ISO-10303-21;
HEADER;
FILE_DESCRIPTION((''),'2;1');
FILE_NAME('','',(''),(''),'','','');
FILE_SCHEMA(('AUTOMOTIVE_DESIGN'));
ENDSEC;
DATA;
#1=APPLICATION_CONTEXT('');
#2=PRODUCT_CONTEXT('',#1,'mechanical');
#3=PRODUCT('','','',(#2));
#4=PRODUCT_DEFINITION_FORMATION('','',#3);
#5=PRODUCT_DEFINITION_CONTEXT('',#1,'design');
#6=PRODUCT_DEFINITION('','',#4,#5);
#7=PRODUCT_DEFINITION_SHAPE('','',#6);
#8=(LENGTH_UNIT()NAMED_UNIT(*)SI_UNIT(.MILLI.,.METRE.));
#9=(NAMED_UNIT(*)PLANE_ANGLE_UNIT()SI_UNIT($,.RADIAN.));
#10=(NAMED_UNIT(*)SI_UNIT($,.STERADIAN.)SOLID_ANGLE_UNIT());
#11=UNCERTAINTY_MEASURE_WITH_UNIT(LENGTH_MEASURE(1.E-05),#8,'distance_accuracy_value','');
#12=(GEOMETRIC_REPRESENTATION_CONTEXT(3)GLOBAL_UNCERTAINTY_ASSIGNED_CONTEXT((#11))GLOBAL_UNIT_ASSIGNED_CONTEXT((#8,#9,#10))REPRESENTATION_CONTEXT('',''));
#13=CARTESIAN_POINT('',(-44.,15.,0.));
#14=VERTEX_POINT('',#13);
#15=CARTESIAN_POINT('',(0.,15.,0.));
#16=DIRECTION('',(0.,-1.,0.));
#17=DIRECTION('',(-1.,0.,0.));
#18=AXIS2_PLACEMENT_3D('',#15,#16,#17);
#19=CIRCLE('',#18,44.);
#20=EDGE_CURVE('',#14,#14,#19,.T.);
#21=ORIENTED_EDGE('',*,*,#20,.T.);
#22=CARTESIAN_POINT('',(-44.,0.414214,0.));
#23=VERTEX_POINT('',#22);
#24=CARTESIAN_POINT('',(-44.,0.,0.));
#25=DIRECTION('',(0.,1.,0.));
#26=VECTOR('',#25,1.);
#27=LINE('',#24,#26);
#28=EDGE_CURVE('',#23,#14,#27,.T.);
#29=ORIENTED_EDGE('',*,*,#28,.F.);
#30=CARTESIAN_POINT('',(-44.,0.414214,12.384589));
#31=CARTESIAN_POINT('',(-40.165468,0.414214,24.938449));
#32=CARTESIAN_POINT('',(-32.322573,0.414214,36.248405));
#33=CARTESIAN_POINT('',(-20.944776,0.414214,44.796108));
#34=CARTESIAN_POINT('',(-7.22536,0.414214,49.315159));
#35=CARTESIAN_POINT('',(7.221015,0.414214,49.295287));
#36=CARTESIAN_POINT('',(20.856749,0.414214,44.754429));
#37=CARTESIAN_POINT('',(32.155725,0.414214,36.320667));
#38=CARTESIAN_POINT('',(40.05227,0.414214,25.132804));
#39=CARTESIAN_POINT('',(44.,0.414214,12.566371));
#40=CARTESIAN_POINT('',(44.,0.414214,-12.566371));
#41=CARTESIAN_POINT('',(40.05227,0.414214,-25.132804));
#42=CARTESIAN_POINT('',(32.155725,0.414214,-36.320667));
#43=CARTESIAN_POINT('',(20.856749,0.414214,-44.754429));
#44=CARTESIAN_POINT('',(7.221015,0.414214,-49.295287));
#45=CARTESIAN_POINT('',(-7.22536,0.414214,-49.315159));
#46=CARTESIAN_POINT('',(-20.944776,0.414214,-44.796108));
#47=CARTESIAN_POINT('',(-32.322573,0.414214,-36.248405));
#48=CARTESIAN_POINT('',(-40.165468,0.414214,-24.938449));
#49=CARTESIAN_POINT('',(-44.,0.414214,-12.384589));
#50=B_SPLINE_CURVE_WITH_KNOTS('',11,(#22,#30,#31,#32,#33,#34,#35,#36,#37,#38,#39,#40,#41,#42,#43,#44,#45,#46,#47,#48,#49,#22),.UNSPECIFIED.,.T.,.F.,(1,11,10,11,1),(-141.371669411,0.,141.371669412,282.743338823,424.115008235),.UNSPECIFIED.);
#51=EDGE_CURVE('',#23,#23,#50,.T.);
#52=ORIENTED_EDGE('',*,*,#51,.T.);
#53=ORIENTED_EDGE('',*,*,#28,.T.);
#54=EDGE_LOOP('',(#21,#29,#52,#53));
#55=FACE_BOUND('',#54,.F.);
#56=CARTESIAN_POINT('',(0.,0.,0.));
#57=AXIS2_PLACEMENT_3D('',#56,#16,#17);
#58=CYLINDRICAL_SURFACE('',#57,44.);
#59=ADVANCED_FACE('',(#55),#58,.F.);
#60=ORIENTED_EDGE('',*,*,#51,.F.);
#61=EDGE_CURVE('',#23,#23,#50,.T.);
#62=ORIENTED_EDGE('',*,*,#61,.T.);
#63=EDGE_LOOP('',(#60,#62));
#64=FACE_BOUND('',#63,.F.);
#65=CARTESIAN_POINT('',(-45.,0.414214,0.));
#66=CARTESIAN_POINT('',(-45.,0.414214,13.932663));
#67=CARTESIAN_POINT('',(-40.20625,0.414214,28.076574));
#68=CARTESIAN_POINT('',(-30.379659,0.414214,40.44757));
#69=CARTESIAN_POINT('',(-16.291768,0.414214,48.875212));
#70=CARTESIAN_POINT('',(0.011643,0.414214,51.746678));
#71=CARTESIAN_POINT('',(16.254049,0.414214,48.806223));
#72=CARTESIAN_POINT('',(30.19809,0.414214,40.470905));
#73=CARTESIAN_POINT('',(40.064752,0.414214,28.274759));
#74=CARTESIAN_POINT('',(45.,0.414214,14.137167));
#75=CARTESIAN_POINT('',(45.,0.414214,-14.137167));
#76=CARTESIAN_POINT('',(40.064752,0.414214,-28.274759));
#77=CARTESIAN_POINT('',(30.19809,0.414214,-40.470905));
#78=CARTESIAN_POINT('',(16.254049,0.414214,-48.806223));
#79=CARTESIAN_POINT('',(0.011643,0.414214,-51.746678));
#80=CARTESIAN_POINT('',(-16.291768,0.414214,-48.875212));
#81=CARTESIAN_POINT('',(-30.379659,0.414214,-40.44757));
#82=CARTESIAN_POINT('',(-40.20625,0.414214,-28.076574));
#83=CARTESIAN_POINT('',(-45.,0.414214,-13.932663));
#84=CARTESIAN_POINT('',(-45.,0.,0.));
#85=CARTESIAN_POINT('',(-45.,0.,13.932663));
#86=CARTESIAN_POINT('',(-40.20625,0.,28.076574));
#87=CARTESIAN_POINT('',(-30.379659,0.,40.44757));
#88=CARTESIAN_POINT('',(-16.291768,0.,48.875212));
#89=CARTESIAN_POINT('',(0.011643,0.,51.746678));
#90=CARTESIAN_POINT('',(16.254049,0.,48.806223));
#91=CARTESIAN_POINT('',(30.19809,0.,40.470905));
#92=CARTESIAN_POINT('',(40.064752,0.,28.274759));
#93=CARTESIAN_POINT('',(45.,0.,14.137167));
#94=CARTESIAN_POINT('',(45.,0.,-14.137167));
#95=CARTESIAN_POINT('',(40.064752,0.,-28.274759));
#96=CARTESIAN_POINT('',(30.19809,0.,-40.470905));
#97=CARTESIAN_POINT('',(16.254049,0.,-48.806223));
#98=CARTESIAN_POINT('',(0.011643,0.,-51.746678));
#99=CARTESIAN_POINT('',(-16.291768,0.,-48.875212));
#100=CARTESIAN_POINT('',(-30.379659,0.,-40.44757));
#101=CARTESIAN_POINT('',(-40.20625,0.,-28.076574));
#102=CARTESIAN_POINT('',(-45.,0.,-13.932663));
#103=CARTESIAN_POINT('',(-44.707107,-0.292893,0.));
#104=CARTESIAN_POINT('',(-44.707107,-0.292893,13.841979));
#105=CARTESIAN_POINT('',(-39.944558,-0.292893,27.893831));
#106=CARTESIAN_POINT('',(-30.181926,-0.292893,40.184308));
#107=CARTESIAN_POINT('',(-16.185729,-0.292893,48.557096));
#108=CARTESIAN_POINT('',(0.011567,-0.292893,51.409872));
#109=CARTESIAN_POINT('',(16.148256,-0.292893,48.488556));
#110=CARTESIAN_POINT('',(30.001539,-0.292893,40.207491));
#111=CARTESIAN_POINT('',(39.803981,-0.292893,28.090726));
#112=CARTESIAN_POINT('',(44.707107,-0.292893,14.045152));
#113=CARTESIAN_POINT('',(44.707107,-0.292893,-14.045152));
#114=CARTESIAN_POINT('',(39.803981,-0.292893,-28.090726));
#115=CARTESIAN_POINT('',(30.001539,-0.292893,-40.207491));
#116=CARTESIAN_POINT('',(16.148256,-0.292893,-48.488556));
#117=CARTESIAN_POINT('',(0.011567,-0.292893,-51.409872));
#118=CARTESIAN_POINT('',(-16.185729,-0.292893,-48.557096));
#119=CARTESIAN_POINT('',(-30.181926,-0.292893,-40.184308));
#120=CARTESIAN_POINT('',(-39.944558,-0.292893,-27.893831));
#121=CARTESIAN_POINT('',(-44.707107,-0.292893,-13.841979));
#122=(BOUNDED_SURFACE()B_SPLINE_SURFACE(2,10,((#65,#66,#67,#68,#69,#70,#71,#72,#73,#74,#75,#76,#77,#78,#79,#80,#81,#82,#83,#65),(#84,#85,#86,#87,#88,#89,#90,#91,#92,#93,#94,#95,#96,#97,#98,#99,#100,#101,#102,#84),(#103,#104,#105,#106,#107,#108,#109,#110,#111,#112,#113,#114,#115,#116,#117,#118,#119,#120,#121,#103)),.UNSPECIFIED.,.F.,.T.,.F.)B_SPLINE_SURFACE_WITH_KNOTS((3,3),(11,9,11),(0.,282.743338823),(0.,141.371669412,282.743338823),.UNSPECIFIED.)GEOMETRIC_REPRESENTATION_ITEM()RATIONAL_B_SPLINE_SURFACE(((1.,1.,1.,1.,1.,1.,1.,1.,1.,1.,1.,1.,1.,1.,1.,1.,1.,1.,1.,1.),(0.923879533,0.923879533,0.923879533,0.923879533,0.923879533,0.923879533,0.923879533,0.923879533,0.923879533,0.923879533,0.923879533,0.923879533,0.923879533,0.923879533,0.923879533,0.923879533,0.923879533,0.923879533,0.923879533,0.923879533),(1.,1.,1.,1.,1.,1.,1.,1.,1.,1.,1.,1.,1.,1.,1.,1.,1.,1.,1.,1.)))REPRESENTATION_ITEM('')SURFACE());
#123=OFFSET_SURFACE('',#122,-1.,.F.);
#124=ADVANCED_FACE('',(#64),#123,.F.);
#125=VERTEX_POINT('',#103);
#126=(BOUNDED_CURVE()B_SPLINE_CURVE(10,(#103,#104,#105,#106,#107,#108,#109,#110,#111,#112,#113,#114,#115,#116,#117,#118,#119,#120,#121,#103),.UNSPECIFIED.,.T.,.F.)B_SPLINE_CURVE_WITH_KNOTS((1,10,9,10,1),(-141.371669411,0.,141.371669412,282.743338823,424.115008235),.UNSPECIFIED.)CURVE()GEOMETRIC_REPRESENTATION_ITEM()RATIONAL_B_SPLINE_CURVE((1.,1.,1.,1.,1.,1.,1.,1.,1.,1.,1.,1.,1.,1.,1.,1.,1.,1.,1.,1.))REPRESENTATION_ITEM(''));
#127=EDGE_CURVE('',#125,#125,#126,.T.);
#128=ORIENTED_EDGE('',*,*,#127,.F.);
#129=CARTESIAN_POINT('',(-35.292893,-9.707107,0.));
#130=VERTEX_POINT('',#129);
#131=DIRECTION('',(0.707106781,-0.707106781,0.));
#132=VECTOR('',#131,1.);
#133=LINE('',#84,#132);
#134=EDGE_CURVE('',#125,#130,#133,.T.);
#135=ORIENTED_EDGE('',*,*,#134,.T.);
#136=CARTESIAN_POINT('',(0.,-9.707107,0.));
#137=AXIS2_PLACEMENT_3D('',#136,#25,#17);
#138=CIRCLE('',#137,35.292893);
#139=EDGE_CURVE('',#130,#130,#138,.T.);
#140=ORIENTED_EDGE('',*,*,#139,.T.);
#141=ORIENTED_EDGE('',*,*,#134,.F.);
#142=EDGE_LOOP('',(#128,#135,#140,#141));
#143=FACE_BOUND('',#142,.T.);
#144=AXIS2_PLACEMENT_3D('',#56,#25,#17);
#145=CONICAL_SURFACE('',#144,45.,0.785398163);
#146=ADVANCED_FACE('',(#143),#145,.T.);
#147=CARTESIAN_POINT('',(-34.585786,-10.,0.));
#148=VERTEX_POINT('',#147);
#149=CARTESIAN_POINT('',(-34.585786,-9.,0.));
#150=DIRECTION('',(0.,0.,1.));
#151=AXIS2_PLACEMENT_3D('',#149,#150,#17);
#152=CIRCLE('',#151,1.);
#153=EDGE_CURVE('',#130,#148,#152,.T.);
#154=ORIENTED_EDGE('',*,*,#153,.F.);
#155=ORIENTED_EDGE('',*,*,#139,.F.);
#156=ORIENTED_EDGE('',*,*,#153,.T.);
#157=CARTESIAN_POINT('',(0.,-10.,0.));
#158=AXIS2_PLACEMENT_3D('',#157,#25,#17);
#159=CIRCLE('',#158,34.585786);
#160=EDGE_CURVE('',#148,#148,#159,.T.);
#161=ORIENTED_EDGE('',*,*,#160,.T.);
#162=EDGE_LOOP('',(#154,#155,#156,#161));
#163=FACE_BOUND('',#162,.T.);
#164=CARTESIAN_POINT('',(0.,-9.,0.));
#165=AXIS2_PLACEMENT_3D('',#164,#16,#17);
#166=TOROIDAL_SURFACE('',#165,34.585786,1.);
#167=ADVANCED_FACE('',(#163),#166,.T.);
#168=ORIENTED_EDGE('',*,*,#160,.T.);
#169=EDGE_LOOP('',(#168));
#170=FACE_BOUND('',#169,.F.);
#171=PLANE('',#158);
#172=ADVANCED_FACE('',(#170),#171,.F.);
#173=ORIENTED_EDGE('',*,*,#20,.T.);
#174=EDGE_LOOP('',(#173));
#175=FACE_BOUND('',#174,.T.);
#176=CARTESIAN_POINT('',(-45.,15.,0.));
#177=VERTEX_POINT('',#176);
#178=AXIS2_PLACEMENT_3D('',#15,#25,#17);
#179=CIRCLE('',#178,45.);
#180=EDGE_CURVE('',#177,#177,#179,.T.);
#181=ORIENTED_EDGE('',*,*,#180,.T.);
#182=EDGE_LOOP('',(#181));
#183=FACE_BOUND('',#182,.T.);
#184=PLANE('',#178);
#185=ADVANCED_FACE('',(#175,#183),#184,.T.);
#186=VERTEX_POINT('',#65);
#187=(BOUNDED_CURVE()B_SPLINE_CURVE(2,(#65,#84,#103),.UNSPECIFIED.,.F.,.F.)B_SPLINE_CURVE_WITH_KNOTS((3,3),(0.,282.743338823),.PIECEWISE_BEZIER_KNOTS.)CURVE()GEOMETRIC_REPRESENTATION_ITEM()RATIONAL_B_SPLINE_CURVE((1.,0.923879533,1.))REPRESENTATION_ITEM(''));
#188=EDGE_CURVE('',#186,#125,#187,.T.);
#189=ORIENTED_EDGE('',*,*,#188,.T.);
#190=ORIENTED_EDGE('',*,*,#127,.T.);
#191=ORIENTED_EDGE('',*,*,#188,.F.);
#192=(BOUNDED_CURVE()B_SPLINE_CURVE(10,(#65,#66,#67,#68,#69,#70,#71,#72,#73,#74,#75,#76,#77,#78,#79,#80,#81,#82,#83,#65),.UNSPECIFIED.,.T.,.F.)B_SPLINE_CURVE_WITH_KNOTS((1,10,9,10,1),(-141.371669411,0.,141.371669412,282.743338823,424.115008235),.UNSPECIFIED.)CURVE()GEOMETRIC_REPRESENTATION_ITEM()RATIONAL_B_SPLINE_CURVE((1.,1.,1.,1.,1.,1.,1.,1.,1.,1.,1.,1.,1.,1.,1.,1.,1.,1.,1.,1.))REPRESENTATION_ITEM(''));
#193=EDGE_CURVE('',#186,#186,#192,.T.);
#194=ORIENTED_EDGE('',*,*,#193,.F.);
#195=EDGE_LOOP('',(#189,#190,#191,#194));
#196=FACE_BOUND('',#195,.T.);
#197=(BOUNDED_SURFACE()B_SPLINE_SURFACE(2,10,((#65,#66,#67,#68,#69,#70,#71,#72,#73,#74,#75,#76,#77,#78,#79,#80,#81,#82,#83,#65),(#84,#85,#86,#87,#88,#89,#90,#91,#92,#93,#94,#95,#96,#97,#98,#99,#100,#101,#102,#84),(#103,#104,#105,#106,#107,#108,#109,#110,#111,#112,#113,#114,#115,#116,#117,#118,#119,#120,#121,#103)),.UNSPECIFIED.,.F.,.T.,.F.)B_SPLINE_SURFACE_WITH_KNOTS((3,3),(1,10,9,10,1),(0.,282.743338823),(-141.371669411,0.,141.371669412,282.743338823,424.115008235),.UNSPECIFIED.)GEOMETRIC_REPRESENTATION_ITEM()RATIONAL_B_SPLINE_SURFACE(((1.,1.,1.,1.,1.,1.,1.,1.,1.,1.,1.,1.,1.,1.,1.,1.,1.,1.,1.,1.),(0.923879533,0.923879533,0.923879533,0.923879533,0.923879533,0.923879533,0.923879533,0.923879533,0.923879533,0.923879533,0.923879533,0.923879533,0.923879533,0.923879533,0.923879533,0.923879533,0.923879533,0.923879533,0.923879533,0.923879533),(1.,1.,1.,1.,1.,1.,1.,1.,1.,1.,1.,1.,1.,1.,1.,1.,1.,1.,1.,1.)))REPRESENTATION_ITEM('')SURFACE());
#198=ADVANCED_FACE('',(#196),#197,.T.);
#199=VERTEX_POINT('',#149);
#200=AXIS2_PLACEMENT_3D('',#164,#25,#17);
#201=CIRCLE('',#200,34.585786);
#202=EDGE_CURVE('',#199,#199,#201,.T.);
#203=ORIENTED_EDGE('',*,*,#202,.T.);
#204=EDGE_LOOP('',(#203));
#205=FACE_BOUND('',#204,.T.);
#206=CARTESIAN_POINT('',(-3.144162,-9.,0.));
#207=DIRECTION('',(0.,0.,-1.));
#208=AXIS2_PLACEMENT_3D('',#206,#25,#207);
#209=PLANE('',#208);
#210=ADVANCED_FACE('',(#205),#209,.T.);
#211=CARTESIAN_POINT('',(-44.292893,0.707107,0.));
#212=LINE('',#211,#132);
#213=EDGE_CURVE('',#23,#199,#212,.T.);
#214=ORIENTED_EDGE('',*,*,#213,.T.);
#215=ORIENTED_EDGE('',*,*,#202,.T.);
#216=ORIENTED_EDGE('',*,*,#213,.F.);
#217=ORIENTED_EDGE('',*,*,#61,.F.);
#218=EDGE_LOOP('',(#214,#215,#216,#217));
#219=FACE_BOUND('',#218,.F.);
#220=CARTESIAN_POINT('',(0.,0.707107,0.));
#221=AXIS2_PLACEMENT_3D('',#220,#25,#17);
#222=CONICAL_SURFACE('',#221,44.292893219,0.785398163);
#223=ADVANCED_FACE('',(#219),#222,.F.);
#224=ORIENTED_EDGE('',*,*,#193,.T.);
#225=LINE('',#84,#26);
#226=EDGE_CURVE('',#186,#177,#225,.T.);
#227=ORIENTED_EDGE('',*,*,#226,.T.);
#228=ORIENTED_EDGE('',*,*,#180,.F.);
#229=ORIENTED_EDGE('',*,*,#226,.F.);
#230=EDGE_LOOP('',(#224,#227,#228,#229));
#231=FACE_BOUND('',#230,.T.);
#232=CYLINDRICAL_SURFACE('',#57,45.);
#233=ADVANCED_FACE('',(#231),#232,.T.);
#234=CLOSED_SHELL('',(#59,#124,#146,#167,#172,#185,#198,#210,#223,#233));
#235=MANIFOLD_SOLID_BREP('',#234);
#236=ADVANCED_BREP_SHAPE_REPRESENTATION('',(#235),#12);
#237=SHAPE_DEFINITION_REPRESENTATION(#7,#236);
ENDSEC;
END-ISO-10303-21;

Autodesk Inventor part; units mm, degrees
ref_plane "YZ Plane" through (0, 0, 0) normal (1, 0, 0) x (0, 1, 0)
ref_plane "XZ Plane" through (0, 0, 0) normal (0, 1, 0) x (-1, 0, 0)
ref_plane "XY Plane" through (0, 0, 0) normal (0, 0, 1) x (1, 0, 0)
sketch "Boceto1" plane through (0, 0, 0) normal (0, 1, 0) x (-1, 0, 0)
  circle A0 centre (0, 0) radius 45
  dimension "d0" = 90
extrude "Extrusión1" add sketch "Boceto1" along normal blind 15
extrude "Extrusión2" add sketch "Boceto1" against normal blind 10 draft -45
fillet "Empalme1" radius 1 2 edges at (45, 0, 0) (35, -10, 0)
shell "Vaciado1" thickness 1 removed faces 1 at (-12.1353, 15, -8.8168)
properties part number "cabezal"
